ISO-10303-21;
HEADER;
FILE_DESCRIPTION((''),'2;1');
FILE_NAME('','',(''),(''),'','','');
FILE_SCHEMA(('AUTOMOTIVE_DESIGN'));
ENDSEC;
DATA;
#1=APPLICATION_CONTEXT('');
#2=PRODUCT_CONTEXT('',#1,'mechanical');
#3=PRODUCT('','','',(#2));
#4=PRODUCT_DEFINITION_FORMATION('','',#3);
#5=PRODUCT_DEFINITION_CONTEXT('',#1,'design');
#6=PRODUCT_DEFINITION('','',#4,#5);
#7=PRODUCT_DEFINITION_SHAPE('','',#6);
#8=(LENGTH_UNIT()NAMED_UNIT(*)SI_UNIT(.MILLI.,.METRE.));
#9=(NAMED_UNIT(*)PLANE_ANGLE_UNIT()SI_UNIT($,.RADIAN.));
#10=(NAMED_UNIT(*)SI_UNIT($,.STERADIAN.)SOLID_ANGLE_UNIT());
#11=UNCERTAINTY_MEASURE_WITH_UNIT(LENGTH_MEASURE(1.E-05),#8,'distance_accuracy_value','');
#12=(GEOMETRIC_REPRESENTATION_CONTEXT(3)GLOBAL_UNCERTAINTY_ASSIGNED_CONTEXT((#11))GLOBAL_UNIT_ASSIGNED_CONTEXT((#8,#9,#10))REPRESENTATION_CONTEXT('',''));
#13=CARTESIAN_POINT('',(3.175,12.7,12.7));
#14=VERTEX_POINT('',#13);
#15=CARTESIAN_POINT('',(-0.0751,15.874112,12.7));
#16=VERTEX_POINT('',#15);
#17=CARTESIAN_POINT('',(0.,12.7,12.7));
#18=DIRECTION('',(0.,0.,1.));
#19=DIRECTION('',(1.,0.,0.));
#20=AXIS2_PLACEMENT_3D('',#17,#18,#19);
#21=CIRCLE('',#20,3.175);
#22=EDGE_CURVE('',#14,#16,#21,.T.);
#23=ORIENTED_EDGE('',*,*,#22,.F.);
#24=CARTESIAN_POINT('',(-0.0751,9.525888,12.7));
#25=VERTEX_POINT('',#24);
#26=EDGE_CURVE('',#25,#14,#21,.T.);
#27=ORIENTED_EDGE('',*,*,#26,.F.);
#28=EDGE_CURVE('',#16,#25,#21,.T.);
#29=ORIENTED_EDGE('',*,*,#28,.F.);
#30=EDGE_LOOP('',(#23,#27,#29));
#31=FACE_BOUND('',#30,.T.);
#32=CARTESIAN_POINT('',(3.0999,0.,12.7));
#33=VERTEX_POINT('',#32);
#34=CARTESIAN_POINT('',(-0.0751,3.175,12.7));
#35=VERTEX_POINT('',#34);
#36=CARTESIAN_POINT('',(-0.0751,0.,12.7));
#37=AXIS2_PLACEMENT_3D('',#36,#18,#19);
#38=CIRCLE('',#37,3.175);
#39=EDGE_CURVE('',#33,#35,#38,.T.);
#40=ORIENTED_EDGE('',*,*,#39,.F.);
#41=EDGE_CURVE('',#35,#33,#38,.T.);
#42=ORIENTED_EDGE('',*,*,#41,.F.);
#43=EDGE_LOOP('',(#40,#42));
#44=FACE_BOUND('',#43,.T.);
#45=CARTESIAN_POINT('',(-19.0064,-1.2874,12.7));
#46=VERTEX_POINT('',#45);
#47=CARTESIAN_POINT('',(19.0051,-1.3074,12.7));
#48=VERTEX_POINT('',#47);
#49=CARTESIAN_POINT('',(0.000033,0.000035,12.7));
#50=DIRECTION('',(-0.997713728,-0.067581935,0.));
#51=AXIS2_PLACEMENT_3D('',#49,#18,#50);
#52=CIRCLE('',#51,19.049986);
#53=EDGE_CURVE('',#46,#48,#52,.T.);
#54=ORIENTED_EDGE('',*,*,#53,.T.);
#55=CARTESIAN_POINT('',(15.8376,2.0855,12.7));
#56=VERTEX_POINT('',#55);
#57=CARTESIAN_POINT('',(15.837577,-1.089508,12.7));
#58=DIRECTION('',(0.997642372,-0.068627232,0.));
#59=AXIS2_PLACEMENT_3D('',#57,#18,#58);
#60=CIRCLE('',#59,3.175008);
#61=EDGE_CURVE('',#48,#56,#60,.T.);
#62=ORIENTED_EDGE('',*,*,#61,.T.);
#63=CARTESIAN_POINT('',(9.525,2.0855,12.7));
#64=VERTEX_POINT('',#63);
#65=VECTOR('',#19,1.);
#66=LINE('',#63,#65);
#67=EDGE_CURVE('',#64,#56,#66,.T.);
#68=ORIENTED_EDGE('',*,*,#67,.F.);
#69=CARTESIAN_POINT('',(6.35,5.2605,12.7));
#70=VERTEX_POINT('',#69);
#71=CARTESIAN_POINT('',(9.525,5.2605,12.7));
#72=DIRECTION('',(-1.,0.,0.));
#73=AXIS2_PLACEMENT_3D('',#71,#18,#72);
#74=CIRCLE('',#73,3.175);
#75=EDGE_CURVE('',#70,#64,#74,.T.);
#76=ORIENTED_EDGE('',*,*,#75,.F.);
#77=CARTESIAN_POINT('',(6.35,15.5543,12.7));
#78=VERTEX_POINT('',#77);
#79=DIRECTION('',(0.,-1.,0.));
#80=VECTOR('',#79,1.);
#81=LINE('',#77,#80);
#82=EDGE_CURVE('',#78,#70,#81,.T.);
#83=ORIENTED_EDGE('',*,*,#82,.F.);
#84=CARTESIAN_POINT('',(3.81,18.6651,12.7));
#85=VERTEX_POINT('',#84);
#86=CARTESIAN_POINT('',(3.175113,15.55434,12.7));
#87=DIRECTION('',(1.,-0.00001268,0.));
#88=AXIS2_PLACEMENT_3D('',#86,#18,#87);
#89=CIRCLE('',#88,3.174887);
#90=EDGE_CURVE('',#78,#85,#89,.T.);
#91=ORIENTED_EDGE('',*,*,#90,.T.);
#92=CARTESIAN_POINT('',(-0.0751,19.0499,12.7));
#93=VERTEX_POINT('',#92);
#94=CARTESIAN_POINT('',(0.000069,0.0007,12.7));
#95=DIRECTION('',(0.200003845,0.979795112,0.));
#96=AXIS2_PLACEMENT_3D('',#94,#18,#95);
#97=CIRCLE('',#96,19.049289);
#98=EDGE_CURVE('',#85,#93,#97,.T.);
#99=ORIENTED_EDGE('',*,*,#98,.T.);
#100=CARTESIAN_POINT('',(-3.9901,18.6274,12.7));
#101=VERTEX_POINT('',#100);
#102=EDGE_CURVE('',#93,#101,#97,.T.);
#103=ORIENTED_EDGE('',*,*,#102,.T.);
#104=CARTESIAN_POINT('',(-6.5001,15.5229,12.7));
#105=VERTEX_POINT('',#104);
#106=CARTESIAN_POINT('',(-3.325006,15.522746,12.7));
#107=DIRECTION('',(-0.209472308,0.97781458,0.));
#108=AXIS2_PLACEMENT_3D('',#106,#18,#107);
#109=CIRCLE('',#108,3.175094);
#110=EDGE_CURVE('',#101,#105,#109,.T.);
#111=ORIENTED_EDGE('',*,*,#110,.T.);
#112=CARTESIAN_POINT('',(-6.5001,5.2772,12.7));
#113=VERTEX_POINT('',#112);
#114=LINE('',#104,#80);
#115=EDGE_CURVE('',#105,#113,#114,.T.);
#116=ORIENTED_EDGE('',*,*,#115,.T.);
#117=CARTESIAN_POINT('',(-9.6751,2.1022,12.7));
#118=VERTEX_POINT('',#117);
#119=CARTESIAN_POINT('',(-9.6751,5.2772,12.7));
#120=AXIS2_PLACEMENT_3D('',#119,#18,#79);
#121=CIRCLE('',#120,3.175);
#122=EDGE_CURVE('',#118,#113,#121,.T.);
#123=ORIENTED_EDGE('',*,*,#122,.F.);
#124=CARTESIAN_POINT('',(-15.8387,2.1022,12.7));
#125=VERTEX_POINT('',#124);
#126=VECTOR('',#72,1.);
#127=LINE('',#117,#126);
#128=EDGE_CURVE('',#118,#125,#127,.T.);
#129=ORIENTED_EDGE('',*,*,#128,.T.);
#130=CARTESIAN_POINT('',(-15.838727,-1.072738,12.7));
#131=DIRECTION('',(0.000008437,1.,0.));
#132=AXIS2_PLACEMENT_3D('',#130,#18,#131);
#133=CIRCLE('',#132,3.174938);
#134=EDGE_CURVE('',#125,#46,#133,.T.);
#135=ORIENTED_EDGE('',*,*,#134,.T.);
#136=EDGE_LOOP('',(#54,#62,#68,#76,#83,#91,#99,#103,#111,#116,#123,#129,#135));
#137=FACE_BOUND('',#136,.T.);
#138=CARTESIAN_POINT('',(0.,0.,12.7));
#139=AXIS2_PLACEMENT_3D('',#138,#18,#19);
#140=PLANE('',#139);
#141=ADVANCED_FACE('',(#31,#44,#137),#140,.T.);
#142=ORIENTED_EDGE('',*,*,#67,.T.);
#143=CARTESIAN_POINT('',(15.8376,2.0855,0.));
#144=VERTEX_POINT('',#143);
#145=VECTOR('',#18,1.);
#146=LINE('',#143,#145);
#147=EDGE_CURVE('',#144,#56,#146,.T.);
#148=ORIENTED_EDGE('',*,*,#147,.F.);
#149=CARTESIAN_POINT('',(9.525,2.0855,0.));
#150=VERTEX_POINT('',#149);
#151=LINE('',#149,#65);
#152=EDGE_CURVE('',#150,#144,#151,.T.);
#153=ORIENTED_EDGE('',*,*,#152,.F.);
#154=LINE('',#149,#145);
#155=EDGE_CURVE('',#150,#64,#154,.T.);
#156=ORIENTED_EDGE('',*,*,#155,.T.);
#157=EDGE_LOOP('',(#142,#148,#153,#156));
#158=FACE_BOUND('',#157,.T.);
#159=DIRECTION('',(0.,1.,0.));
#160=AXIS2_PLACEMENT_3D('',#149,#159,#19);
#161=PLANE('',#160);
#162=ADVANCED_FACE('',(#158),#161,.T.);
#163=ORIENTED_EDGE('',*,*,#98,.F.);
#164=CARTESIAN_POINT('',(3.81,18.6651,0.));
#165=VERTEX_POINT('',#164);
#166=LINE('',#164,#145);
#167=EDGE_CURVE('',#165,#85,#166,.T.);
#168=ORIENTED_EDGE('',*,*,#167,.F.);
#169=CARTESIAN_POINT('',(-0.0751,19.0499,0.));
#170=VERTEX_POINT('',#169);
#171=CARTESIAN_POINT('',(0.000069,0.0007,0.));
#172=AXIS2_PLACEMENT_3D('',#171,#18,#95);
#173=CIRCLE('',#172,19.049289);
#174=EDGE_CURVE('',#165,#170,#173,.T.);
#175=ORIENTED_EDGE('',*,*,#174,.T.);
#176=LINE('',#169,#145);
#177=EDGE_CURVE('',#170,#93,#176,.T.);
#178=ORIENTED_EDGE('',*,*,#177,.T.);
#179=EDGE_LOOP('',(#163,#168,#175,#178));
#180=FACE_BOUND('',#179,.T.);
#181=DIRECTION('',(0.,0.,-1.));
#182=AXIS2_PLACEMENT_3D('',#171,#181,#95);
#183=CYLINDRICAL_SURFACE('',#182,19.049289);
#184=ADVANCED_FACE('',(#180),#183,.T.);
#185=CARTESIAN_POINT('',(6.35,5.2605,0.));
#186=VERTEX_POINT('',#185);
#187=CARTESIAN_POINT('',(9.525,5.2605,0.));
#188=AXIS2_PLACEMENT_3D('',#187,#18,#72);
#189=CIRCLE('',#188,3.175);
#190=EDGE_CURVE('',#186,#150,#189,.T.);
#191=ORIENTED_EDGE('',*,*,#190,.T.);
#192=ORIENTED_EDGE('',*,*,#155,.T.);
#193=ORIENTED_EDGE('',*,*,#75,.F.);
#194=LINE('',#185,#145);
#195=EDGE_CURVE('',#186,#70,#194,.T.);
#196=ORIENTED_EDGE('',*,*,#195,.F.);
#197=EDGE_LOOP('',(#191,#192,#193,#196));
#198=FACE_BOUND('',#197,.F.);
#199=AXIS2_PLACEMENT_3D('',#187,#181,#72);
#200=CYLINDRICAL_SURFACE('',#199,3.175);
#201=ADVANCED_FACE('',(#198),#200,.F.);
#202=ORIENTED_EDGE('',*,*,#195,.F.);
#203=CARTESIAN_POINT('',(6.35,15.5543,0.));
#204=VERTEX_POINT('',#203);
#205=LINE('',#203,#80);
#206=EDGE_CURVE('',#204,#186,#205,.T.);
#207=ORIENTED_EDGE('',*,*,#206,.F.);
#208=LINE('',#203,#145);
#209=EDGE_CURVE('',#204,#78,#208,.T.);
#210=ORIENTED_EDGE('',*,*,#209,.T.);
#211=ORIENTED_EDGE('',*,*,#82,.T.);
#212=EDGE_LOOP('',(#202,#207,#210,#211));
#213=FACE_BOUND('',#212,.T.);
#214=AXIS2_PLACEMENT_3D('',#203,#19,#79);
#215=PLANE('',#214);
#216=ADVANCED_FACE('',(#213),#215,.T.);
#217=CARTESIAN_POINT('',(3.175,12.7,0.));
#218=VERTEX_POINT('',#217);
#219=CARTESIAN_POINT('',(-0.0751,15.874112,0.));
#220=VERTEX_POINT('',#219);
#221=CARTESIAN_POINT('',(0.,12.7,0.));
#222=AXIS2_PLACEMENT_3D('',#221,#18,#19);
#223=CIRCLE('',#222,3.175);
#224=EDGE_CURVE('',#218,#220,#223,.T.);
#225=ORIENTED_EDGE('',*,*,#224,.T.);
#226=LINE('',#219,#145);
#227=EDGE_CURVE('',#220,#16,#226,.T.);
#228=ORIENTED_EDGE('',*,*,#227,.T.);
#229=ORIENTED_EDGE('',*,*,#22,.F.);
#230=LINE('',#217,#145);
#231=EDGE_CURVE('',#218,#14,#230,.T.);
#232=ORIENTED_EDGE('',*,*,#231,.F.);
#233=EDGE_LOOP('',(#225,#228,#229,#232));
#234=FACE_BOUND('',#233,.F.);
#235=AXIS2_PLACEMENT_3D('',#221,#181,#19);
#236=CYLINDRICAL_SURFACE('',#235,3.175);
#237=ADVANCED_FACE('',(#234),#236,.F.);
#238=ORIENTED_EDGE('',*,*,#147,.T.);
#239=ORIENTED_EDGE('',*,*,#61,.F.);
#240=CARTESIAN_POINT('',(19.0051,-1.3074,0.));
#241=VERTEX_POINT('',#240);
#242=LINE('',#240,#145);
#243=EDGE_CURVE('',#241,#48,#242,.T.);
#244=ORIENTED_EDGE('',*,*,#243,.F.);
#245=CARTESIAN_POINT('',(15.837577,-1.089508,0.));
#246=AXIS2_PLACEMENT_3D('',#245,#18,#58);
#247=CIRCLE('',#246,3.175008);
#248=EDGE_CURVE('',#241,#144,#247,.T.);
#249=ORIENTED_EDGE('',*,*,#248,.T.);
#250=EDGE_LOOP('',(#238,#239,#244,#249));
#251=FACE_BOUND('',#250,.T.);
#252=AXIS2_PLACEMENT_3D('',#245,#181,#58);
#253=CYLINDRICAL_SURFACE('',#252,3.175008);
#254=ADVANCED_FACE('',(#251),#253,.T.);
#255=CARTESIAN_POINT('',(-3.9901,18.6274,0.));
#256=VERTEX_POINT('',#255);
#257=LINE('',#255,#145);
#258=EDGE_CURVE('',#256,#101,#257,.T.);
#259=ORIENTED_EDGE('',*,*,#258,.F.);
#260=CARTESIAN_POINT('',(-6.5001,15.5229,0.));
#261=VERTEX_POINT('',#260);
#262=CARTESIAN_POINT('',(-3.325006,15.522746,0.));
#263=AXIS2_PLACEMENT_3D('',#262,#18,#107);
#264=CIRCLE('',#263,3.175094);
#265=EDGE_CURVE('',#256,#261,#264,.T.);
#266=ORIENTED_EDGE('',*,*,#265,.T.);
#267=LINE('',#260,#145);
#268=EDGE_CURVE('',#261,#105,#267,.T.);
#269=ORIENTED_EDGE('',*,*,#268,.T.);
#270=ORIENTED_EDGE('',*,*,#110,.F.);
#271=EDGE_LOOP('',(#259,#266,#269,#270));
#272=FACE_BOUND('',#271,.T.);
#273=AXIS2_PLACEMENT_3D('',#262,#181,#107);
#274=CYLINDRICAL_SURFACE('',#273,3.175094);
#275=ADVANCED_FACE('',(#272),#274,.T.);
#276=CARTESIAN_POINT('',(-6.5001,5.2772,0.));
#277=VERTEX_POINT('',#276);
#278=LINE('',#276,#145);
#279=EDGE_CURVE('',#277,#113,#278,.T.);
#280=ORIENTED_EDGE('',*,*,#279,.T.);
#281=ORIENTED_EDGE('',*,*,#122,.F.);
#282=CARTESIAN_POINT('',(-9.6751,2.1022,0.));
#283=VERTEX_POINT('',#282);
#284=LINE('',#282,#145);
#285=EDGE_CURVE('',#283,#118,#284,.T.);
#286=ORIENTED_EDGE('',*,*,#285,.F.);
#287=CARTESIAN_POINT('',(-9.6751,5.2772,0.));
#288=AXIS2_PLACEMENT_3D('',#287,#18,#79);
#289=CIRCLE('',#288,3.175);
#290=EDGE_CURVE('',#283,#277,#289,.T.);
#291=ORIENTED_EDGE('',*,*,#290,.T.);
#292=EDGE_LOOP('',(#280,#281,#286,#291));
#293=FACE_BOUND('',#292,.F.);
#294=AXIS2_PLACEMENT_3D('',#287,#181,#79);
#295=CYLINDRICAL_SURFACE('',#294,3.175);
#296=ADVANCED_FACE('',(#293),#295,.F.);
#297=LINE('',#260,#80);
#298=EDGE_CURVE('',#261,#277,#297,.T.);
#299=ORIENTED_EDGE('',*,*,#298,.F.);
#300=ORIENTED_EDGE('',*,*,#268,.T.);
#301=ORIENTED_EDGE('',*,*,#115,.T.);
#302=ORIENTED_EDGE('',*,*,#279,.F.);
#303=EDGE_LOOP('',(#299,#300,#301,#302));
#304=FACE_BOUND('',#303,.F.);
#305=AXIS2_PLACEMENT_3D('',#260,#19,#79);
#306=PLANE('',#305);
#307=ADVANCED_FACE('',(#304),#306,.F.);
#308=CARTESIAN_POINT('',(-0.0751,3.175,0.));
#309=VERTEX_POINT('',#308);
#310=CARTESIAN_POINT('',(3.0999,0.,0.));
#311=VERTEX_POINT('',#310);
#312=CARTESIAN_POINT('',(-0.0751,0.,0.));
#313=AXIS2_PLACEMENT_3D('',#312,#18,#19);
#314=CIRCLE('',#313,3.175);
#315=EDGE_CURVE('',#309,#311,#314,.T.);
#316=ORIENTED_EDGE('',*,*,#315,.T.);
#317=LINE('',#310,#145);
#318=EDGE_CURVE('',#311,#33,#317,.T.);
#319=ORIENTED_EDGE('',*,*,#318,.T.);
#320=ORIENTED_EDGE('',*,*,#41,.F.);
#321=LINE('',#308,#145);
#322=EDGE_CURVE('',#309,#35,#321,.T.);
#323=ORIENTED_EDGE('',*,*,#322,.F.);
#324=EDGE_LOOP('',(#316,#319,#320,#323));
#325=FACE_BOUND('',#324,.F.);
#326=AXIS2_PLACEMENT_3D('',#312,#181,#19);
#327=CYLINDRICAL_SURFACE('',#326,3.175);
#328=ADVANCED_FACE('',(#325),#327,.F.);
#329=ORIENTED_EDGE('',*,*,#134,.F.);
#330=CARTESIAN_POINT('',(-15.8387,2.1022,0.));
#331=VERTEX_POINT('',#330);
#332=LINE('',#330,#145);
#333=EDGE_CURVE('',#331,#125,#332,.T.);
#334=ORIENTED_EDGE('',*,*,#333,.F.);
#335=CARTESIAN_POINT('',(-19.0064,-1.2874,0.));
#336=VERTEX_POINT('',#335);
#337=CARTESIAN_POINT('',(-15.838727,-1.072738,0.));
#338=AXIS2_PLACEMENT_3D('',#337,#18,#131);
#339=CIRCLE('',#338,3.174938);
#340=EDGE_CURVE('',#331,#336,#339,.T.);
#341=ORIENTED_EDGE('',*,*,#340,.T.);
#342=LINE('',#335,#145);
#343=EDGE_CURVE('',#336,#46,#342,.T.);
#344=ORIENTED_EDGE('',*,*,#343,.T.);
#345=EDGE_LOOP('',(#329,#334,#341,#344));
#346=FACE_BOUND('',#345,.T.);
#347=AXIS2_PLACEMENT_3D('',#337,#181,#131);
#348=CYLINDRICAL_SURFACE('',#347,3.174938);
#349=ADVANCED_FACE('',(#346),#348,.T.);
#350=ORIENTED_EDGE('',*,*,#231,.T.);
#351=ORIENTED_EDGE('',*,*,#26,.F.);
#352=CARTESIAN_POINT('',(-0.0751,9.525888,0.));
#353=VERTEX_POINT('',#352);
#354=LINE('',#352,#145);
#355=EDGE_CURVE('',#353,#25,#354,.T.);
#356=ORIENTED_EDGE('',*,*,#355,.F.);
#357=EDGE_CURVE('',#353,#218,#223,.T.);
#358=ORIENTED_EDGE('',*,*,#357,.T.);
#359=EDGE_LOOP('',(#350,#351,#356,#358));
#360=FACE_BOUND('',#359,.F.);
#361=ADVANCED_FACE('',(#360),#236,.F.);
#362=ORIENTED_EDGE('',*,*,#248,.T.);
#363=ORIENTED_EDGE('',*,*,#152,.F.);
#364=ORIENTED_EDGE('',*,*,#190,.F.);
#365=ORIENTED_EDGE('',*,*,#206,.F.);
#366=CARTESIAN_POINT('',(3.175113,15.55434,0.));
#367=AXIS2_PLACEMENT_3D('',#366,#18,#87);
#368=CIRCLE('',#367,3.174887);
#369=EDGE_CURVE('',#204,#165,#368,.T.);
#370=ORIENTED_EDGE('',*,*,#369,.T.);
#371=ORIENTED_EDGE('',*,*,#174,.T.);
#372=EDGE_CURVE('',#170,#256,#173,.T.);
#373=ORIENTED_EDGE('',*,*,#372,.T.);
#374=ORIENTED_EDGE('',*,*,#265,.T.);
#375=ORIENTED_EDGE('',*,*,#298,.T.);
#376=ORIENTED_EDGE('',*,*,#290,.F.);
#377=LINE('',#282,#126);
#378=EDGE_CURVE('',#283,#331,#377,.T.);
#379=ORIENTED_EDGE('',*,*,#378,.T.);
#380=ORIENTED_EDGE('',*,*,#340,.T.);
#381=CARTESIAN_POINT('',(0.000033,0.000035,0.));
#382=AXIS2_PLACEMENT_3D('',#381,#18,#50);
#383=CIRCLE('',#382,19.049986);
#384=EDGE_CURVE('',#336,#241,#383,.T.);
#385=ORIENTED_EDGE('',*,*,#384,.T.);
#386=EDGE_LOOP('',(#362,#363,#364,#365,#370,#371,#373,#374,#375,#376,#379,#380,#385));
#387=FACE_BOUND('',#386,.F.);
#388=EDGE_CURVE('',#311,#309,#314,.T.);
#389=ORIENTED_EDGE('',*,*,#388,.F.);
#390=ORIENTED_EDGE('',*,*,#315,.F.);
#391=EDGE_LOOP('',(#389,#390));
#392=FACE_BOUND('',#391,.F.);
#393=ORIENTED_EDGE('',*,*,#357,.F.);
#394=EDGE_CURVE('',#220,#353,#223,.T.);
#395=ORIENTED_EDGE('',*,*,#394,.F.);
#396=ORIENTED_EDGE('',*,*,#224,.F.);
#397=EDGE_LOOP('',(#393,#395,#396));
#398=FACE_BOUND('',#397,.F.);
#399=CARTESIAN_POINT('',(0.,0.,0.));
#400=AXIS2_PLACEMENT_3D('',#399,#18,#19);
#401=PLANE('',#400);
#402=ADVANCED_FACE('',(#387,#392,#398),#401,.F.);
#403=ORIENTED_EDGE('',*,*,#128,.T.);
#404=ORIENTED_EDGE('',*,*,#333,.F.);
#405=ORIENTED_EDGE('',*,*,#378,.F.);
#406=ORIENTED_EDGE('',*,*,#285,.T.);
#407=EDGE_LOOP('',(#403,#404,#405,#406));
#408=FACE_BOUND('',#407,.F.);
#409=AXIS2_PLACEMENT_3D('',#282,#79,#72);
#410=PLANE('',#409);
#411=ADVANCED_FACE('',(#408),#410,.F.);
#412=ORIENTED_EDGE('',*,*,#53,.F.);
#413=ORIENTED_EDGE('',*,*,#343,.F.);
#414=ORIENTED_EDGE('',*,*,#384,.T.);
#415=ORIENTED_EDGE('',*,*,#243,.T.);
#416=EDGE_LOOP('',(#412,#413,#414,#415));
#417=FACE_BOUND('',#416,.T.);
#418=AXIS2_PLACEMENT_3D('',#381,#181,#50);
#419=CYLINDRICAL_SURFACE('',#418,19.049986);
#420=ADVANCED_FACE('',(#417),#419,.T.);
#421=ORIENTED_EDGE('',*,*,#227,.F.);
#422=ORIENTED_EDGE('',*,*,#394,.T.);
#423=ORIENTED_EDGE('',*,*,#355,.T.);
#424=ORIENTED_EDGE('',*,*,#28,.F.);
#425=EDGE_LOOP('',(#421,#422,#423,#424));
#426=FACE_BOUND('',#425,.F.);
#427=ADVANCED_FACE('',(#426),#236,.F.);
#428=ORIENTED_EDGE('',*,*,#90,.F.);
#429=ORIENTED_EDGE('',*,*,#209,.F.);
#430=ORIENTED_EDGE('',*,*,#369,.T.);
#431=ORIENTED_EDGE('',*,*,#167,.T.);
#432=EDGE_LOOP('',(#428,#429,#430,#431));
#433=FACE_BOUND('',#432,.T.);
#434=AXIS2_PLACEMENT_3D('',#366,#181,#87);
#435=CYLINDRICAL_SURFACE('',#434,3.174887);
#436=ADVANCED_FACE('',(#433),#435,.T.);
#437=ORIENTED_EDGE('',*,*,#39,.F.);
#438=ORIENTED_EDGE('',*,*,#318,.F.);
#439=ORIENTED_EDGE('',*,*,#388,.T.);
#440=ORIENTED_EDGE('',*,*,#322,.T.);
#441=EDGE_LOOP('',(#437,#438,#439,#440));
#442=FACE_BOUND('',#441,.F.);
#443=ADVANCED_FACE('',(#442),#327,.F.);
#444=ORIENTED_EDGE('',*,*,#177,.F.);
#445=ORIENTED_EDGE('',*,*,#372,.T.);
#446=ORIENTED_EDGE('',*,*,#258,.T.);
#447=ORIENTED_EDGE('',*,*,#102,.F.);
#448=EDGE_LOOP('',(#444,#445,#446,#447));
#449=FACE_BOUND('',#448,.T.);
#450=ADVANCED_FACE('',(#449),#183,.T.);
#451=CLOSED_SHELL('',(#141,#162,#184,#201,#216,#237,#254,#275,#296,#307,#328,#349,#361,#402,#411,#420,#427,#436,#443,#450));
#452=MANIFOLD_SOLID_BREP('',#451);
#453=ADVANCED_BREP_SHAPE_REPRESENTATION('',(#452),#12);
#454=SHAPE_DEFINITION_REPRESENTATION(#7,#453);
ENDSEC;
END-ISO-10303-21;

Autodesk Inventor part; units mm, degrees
ref_plane "YZ Plane" through (0, 0, 0) normal (1, 0, 0) x (0, 1, 0)
ref_plane "XZ Plane" through (0, 0, 0) normal (0, 1, 0) x (-1, 0, 0)
ref_plane "XY Plane" through (0, 0, 0) normal (0, 0, 1) x (1, 0, 0)
sketch "Sketch1" plane through (0, 0, 0) normal (0, 0, 1) x (1, 0, 0)
  circle A0 centre (0, 12.7) radius 3.175
  circle A1 centre (-0.0751, 0) radius 3.175
  line L0 (-0.0751, 0) -> (-0.0751, 19.0499)
  line L1 (-0.0751, 3.175) -> (-0.0751, 24.8386)
  line L2 (6.35, 15.5543) -> (6.35, 5.2605)
  line L3 (9.525, 2.0855) -> (15.8376, 2.0855)
  line L4 (-6.5001, 15.5229) -> (-6.5001, 5.2772)
  line L5 (-9.6751, 2.1022) -> (-15.8387, 2.1022)
  arc A2 (-19.0064, -1.2874) -> (19.0051, -1.3074) centre (0, 0) ccw
  arc A3 (3.81, 18.6651) -> (-3.9901, 18.6274) centre (0, 0) ccw
  arc A4 (-3.9901, 18.6274) -> (-6.5001, 15.5229) centre (-3.3251, 15.5229) ccw
  arc A5 (6.35, 15.5543) -> (3.81, 18.6651) centre (3.175, 15.5543) ccw
  arc A6 (6.35, 5.2605) -> (9.525, 2.0855) centre (9.525, 5.2605) ccw
  arc A7 (-9.6751, 2.1022) -> (-6.5001, 5.2772) centre (-9.6751, 5.2772) ccw
  arc A8 (-15.8387, 2.1022) -> (-19.0064, -1.2874) centre (-15.8387, -1.0728) ccw
  arc A9 (19.0051, -1.3074) -> (15.8376, 2.0855) centre (15.8376, -1.0895) ccw
  point P0 (6.35, 17.9605)
  point P1 (6.35, 2.0855)
  point P2 (18.9355, 2.0855)
  point P3 (-6.5001, 2.1022)
  point P4 (-18.9337, 2.1022)
  point P5 (-6.5001, 17.9067)
  dimension "d6" = 6.35
  dimension "d3" = 6.35
  dimension "d11" = 15.875
  dimension "d12" = 3.175
extrude "Extrusion1" add sketch "Sketch1" along normal blind 12.7
properties part number "Crank"
